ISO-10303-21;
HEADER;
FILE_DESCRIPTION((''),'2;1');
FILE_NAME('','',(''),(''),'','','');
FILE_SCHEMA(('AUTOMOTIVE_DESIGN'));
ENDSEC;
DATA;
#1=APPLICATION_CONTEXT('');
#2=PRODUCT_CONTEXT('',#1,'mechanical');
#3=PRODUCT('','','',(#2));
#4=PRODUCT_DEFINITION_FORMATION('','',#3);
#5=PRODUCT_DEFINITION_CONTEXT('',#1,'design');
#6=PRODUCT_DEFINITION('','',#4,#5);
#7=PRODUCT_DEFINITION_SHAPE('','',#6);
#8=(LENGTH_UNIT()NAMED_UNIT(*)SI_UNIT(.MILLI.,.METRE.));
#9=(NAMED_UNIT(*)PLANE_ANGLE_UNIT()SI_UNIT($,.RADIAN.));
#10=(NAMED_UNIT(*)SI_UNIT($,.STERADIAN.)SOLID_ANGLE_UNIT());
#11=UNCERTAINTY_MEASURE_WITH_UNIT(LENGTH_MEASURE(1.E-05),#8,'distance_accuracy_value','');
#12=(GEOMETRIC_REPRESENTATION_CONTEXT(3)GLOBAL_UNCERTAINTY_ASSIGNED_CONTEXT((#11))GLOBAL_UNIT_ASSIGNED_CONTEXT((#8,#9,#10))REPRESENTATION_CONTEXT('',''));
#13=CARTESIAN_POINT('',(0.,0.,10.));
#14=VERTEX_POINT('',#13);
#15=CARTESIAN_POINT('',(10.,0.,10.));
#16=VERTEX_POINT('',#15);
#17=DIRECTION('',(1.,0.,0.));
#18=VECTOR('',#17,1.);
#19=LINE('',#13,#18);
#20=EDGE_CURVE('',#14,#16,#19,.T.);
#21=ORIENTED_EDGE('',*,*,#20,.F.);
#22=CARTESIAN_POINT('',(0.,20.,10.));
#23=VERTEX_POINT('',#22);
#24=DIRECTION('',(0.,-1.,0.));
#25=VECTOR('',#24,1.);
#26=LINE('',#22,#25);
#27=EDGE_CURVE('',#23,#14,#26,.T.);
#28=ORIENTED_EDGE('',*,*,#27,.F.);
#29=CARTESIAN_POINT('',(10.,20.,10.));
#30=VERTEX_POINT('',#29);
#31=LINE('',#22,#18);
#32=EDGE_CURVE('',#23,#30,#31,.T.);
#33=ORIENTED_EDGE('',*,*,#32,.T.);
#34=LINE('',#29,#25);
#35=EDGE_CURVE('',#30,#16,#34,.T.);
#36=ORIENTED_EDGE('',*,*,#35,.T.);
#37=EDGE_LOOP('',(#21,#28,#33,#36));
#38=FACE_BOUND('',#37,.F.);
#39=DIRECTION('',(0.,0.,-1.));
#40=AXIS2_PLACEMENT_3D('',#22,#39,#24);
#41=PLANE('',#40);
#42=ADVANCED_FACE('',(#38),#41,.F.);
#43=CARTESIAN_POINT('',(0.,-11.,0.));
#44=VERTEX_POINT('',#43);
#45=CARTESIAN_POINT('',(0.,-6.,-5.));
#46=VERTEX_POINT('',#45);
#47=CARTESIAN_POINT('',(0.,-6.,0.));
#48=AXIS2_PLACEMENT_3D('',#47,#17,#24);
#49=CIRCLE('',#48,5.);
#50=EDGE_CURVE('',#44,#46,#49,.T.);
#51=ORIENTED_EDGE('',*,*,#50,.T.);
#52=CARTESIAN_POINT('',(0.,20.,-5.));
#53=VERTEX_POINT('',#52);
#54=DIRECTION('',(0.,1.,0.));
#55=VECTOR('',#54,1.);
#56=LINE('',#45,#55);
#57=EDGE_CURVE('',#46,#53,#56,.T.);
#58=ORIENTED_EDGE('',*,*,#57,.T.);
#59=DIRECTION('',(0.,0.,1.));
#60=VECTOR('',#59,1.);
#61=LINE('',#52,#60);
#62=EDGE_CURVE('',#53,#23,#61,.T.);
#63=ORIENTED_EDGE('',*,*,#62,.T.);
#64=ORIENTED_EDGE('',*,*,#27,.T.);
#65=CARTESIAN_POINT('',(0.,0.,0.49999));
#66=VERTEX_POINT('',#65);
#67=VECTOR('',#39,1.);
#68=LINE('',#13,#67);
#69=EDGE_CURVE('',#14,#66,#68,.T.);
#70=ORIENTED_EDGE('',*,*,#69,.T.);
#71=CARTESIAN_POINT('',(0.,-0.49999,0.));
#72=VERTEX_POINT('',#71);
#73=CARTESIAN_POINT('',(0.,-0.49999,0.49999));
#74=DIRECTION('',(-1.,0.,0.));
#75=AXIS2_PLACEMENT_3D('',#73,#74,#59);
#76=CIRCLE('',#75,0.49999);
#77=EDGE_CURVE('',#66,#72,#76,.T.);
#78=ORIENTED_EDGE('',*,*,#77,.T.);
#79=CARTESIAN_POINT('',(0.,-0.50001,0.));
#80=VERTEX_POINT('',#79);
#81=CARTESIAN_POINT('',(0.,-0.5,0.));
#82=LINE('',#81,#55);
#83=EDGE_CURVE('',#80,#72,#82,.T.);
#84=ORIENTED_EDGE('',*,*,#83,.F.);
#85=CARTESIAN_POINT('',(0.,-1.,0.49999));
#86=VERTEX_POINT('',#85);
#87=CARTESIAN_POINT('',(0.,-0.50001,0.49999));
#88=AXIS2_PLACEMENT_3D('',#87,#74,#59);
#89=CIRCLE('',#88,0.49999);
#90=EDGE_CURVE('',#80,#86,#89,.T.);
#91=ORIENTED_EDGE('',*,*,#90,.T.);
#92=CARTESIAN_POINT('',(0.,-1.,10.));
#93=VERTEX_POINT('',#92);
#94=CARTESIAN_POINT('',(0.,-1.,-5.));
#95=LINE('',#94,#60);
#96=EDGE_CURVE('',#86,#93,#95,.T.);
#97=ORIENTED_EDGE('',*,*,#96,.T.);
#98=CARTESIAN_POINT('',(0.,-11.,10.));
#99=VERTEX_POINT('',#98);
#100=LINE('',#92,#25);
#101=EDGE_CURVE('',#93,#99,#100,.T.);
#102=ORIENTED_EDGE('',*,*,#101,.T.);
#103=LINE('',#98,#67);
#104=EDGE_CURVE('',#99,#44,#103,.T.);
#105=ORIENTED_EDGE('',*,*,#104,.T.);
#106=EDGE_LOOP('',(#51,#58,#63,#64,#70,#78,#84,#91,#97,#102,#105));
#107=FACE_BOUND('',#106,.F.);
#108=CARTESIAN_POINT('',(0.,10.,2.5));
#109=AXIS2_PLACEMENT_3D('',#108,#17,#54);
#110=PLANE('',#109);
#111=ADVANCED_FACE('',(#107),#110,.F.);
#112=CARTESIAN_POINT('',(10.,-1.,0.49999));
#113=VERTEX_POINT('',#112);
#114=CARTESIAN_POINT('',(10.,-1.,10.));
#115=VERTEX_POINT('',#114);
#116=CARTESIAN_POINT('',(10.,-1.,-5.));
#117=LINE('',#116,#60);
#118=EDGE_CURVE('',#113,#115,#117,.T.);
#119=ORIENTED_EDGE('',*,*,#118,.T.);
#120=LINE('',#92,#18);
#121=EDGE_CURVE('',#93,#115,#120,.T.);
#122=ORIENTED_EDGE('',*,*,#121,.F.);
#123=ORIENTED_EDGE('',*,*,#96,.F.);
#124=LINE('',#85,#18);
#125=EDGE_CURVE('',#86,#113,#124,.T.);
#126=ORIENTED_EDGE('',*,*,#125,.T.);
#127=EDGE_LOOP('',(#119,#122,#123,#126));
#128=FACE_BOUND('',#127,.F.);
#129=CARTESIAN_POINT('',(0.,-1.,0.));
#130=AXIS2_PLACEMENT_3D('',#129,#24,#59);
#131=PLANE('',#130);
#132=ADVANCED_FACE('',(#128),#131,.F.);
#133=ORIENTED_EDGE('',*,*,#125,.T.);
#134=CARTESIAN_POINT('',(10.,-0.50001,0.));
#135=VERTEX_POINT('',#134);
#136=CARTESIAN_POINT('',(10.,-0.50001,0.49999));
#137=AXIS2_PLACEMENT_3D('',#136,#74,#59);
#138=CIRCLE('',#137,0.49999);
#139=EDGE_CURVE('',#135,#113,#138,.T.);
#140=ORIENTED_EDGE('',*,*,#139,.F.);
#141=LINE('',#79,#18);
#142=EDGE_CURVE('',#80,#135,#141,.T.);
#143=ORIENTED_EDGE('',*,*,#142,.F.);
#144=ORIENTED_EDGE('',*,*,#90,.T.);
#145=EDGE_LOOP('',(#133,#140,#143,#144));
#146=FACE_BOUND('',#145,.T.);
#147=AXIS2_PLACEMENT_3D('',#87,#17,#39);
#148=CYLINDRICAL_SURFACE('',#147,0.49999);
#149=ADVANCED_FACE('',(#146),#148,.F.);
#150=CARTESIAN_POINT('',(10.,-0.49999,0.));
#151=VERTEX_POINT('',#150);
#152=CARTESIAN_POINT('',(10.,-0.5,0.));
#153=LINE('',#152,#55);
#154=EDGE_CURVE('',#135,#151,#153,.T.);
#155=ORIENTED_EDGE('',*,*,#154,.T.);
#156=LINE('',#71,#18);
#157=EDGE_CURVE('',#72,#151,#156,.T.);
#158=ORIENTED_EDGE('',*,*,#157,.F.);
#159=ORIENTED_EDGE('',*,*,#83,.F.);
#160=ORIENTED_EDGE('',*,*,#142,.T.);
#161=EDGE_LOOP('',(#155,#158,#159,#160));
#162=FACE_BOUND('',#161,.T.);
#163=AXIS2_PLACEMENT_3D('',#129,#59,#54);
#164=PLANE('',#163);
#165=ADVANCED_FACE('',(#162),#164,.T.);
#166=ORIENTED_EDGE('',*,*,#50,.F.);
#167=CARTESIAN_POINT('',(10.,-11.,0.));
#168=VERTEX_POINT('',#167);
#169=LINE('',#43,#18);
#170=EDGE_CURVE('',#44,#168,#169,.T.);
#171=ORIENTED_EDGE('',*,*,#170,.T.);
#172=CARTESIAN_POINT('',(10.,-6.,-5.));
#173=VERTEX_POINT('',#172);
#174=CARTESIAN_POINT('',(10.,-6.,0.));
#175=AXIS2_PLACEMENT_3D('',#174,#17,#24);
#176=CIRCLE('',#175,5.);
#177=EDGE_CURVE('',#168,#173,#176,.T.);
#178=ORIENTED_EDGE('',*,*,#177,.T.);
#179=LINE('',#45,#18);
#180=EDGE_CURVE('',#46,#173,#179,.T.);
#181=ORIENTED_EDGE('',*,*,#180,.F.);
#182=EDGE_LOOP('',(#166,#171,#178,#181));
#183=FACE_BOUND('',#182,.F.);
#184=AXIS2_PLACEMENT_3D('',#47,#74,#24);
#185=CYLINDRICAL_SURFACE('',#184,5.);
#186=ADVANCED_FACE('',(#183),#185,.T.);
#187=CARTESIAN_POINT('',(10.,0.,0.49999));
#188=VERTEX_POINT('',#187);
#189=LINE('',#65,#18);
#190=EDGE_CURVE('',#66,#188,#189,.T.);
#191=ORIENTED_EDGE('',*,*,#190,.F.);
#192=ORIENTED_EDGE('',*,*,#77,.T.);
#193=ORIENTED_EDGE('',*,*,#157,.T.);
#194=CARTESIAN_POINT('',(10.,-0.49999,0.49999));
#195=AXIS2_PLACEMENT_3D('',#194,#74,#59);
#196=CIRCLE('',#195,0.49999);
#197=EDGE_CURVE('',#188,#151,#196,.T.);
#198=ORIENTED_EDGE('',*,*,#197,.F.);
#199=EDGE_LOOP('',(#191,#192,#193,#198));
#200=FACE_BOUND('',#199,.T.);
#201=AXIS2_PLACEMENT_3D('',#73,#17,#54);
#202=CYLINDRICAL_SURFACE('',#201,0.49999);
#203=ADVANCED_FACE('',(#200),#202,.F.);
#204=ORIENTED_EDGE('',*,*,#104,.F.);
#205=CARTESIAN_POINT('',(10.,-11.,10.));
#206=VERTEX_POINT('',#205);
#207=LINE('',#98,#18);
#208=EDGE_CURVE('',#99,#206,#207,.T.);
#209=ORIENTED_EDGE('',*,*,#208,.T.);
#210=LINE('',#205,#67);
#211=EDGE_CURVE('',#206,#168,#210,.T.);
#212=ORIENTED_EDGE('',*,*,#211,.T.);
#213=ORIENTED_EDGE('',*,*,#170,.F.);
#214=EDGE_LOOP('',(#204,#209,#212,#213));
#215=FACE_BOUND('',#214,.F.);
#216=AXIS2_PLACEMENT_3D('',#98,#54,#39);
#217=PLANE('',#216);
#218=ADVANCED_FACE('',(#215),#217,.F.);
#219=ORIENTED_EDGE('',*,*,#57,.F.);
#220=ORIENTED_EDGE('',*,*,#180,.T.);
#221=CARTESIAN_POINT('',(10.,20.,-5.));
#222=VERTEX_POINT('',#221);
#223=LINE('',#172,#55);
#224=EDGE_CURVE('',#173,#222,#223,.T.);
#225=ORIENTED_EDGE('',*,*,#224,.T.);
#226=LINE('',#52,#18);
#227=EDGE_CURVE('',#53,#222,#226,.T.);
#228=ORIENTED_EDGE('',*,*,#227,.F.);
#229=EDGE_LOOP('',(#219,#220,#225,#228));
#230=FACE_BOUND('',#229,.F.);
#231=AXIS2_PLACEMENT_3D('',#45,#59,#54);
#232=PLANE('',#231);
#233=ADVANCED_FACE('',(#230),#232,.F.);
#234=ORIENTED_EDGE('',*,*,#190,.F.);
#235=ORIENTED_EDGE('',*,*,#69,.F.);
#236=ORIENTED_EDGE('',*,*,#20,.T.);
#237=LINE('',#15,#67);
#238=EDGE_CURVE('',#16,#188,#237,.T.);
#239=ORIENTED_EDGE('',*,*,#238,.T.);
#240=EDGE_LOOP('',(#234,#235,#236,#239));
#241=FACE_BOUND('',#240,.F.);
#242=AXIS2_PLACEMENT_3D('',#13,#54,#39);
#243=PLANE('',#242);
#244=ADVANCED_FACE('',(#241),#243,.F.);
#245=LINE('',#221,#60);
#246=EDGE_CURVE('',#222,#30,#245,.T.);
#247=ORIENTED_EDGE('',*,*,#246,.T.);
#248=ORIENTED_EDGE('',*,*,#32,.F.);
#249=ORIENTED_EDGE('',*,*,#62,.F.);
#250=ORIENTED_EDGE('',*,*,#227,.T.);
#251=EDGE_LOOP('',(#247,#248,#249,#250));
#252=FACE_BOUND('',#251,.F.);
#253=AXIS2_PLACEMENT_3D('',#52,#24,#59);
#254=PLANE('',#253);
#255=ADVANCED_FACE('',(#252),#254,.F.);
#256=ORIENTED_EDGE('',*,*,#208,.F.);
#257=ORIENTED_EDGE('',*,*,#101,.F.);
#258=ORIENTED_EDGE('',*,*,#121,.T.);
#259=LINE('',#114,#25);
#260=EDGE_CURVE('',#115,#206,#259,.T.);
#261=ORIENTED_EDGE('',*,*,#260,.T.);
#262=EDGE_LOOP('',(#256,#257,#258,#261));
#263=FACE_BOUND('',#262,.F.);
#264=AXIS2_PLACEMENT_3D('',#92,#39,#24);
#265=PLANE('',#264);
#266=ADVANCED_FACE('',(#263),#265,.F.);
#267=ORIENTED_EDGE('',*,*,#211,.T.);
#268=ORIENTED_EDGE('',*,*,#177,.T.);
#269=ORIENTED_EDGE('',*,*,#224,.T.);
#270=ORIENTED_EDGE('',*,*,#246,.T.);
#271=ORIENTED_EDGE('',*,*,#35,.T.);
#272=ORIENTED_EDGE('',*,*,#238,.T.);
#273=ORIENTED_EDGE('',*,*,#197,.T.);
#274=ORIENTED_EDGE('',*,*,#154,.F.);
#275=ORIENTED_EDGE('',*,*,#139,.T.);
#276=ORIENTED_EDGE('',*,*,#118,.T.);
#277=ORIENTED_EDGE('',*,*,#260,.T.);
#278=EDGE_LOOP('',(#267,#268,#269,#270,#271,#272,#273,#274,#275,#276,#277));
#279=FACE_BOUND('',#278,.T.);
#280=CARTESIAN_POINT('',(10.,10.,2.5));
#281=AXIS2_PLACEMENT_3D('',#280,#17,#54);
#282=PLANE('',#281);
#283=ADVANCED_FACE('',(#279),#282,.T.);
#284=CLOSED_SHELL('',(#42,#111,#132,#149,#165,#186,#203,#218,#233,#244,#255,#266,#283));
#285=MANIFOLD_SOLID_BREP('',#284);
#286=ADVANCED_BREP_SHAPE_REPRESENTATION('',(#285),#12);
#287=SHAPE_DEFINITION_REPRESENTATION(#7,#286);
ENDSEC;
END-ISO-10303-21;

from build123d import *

# Parameters (mm, degrees)
F0_W     = 1
F0_H     = 5
F1_DEPTH = 10
F2_R     = 0.49999


# Not quite as in the source:
# - a fillet or chamfer is up to 0.001 mm smaller than in the source, because OpenCascade refuses the exact size


with BuildPart() as f1:
    # F0 (on Right) → F1 (new body)
    with BuildSketch(Plane.YZ):
        Polygon((20, -5), (20, 10), (0, 10), (0, 0), (0, -5), align=None)
        with Locations((-0.5, -2.5)):
            Rectangle(F0_W, F0_H)
        with BuildLine():
            Line((-1, -5), (-1, 0))
            Line((-1, 0), (-1, 10))
            Line((-1, 10), (-11, 10))
            Line((-11, 10), (-11, 0))
            ThreePointArc((-11, 0), (-9.5355339059, -3.5355339059), (-6, -5))
            Line((-6, -5), (-1, -5))
        make_face()
    extrude(amount=F1_DEPTH)

    # F2 (radius 0.5 in the source; OpenCascade refuses exactly that, so slightly less here)
    f2_edges = [f1.edges().sort_by_distance(p)[0] for p in [
        (5, 0, 0),
        (5, -1, 0),
    ]]
    fillet(f2_edges, radius=F2_R)


solid = f1.part
